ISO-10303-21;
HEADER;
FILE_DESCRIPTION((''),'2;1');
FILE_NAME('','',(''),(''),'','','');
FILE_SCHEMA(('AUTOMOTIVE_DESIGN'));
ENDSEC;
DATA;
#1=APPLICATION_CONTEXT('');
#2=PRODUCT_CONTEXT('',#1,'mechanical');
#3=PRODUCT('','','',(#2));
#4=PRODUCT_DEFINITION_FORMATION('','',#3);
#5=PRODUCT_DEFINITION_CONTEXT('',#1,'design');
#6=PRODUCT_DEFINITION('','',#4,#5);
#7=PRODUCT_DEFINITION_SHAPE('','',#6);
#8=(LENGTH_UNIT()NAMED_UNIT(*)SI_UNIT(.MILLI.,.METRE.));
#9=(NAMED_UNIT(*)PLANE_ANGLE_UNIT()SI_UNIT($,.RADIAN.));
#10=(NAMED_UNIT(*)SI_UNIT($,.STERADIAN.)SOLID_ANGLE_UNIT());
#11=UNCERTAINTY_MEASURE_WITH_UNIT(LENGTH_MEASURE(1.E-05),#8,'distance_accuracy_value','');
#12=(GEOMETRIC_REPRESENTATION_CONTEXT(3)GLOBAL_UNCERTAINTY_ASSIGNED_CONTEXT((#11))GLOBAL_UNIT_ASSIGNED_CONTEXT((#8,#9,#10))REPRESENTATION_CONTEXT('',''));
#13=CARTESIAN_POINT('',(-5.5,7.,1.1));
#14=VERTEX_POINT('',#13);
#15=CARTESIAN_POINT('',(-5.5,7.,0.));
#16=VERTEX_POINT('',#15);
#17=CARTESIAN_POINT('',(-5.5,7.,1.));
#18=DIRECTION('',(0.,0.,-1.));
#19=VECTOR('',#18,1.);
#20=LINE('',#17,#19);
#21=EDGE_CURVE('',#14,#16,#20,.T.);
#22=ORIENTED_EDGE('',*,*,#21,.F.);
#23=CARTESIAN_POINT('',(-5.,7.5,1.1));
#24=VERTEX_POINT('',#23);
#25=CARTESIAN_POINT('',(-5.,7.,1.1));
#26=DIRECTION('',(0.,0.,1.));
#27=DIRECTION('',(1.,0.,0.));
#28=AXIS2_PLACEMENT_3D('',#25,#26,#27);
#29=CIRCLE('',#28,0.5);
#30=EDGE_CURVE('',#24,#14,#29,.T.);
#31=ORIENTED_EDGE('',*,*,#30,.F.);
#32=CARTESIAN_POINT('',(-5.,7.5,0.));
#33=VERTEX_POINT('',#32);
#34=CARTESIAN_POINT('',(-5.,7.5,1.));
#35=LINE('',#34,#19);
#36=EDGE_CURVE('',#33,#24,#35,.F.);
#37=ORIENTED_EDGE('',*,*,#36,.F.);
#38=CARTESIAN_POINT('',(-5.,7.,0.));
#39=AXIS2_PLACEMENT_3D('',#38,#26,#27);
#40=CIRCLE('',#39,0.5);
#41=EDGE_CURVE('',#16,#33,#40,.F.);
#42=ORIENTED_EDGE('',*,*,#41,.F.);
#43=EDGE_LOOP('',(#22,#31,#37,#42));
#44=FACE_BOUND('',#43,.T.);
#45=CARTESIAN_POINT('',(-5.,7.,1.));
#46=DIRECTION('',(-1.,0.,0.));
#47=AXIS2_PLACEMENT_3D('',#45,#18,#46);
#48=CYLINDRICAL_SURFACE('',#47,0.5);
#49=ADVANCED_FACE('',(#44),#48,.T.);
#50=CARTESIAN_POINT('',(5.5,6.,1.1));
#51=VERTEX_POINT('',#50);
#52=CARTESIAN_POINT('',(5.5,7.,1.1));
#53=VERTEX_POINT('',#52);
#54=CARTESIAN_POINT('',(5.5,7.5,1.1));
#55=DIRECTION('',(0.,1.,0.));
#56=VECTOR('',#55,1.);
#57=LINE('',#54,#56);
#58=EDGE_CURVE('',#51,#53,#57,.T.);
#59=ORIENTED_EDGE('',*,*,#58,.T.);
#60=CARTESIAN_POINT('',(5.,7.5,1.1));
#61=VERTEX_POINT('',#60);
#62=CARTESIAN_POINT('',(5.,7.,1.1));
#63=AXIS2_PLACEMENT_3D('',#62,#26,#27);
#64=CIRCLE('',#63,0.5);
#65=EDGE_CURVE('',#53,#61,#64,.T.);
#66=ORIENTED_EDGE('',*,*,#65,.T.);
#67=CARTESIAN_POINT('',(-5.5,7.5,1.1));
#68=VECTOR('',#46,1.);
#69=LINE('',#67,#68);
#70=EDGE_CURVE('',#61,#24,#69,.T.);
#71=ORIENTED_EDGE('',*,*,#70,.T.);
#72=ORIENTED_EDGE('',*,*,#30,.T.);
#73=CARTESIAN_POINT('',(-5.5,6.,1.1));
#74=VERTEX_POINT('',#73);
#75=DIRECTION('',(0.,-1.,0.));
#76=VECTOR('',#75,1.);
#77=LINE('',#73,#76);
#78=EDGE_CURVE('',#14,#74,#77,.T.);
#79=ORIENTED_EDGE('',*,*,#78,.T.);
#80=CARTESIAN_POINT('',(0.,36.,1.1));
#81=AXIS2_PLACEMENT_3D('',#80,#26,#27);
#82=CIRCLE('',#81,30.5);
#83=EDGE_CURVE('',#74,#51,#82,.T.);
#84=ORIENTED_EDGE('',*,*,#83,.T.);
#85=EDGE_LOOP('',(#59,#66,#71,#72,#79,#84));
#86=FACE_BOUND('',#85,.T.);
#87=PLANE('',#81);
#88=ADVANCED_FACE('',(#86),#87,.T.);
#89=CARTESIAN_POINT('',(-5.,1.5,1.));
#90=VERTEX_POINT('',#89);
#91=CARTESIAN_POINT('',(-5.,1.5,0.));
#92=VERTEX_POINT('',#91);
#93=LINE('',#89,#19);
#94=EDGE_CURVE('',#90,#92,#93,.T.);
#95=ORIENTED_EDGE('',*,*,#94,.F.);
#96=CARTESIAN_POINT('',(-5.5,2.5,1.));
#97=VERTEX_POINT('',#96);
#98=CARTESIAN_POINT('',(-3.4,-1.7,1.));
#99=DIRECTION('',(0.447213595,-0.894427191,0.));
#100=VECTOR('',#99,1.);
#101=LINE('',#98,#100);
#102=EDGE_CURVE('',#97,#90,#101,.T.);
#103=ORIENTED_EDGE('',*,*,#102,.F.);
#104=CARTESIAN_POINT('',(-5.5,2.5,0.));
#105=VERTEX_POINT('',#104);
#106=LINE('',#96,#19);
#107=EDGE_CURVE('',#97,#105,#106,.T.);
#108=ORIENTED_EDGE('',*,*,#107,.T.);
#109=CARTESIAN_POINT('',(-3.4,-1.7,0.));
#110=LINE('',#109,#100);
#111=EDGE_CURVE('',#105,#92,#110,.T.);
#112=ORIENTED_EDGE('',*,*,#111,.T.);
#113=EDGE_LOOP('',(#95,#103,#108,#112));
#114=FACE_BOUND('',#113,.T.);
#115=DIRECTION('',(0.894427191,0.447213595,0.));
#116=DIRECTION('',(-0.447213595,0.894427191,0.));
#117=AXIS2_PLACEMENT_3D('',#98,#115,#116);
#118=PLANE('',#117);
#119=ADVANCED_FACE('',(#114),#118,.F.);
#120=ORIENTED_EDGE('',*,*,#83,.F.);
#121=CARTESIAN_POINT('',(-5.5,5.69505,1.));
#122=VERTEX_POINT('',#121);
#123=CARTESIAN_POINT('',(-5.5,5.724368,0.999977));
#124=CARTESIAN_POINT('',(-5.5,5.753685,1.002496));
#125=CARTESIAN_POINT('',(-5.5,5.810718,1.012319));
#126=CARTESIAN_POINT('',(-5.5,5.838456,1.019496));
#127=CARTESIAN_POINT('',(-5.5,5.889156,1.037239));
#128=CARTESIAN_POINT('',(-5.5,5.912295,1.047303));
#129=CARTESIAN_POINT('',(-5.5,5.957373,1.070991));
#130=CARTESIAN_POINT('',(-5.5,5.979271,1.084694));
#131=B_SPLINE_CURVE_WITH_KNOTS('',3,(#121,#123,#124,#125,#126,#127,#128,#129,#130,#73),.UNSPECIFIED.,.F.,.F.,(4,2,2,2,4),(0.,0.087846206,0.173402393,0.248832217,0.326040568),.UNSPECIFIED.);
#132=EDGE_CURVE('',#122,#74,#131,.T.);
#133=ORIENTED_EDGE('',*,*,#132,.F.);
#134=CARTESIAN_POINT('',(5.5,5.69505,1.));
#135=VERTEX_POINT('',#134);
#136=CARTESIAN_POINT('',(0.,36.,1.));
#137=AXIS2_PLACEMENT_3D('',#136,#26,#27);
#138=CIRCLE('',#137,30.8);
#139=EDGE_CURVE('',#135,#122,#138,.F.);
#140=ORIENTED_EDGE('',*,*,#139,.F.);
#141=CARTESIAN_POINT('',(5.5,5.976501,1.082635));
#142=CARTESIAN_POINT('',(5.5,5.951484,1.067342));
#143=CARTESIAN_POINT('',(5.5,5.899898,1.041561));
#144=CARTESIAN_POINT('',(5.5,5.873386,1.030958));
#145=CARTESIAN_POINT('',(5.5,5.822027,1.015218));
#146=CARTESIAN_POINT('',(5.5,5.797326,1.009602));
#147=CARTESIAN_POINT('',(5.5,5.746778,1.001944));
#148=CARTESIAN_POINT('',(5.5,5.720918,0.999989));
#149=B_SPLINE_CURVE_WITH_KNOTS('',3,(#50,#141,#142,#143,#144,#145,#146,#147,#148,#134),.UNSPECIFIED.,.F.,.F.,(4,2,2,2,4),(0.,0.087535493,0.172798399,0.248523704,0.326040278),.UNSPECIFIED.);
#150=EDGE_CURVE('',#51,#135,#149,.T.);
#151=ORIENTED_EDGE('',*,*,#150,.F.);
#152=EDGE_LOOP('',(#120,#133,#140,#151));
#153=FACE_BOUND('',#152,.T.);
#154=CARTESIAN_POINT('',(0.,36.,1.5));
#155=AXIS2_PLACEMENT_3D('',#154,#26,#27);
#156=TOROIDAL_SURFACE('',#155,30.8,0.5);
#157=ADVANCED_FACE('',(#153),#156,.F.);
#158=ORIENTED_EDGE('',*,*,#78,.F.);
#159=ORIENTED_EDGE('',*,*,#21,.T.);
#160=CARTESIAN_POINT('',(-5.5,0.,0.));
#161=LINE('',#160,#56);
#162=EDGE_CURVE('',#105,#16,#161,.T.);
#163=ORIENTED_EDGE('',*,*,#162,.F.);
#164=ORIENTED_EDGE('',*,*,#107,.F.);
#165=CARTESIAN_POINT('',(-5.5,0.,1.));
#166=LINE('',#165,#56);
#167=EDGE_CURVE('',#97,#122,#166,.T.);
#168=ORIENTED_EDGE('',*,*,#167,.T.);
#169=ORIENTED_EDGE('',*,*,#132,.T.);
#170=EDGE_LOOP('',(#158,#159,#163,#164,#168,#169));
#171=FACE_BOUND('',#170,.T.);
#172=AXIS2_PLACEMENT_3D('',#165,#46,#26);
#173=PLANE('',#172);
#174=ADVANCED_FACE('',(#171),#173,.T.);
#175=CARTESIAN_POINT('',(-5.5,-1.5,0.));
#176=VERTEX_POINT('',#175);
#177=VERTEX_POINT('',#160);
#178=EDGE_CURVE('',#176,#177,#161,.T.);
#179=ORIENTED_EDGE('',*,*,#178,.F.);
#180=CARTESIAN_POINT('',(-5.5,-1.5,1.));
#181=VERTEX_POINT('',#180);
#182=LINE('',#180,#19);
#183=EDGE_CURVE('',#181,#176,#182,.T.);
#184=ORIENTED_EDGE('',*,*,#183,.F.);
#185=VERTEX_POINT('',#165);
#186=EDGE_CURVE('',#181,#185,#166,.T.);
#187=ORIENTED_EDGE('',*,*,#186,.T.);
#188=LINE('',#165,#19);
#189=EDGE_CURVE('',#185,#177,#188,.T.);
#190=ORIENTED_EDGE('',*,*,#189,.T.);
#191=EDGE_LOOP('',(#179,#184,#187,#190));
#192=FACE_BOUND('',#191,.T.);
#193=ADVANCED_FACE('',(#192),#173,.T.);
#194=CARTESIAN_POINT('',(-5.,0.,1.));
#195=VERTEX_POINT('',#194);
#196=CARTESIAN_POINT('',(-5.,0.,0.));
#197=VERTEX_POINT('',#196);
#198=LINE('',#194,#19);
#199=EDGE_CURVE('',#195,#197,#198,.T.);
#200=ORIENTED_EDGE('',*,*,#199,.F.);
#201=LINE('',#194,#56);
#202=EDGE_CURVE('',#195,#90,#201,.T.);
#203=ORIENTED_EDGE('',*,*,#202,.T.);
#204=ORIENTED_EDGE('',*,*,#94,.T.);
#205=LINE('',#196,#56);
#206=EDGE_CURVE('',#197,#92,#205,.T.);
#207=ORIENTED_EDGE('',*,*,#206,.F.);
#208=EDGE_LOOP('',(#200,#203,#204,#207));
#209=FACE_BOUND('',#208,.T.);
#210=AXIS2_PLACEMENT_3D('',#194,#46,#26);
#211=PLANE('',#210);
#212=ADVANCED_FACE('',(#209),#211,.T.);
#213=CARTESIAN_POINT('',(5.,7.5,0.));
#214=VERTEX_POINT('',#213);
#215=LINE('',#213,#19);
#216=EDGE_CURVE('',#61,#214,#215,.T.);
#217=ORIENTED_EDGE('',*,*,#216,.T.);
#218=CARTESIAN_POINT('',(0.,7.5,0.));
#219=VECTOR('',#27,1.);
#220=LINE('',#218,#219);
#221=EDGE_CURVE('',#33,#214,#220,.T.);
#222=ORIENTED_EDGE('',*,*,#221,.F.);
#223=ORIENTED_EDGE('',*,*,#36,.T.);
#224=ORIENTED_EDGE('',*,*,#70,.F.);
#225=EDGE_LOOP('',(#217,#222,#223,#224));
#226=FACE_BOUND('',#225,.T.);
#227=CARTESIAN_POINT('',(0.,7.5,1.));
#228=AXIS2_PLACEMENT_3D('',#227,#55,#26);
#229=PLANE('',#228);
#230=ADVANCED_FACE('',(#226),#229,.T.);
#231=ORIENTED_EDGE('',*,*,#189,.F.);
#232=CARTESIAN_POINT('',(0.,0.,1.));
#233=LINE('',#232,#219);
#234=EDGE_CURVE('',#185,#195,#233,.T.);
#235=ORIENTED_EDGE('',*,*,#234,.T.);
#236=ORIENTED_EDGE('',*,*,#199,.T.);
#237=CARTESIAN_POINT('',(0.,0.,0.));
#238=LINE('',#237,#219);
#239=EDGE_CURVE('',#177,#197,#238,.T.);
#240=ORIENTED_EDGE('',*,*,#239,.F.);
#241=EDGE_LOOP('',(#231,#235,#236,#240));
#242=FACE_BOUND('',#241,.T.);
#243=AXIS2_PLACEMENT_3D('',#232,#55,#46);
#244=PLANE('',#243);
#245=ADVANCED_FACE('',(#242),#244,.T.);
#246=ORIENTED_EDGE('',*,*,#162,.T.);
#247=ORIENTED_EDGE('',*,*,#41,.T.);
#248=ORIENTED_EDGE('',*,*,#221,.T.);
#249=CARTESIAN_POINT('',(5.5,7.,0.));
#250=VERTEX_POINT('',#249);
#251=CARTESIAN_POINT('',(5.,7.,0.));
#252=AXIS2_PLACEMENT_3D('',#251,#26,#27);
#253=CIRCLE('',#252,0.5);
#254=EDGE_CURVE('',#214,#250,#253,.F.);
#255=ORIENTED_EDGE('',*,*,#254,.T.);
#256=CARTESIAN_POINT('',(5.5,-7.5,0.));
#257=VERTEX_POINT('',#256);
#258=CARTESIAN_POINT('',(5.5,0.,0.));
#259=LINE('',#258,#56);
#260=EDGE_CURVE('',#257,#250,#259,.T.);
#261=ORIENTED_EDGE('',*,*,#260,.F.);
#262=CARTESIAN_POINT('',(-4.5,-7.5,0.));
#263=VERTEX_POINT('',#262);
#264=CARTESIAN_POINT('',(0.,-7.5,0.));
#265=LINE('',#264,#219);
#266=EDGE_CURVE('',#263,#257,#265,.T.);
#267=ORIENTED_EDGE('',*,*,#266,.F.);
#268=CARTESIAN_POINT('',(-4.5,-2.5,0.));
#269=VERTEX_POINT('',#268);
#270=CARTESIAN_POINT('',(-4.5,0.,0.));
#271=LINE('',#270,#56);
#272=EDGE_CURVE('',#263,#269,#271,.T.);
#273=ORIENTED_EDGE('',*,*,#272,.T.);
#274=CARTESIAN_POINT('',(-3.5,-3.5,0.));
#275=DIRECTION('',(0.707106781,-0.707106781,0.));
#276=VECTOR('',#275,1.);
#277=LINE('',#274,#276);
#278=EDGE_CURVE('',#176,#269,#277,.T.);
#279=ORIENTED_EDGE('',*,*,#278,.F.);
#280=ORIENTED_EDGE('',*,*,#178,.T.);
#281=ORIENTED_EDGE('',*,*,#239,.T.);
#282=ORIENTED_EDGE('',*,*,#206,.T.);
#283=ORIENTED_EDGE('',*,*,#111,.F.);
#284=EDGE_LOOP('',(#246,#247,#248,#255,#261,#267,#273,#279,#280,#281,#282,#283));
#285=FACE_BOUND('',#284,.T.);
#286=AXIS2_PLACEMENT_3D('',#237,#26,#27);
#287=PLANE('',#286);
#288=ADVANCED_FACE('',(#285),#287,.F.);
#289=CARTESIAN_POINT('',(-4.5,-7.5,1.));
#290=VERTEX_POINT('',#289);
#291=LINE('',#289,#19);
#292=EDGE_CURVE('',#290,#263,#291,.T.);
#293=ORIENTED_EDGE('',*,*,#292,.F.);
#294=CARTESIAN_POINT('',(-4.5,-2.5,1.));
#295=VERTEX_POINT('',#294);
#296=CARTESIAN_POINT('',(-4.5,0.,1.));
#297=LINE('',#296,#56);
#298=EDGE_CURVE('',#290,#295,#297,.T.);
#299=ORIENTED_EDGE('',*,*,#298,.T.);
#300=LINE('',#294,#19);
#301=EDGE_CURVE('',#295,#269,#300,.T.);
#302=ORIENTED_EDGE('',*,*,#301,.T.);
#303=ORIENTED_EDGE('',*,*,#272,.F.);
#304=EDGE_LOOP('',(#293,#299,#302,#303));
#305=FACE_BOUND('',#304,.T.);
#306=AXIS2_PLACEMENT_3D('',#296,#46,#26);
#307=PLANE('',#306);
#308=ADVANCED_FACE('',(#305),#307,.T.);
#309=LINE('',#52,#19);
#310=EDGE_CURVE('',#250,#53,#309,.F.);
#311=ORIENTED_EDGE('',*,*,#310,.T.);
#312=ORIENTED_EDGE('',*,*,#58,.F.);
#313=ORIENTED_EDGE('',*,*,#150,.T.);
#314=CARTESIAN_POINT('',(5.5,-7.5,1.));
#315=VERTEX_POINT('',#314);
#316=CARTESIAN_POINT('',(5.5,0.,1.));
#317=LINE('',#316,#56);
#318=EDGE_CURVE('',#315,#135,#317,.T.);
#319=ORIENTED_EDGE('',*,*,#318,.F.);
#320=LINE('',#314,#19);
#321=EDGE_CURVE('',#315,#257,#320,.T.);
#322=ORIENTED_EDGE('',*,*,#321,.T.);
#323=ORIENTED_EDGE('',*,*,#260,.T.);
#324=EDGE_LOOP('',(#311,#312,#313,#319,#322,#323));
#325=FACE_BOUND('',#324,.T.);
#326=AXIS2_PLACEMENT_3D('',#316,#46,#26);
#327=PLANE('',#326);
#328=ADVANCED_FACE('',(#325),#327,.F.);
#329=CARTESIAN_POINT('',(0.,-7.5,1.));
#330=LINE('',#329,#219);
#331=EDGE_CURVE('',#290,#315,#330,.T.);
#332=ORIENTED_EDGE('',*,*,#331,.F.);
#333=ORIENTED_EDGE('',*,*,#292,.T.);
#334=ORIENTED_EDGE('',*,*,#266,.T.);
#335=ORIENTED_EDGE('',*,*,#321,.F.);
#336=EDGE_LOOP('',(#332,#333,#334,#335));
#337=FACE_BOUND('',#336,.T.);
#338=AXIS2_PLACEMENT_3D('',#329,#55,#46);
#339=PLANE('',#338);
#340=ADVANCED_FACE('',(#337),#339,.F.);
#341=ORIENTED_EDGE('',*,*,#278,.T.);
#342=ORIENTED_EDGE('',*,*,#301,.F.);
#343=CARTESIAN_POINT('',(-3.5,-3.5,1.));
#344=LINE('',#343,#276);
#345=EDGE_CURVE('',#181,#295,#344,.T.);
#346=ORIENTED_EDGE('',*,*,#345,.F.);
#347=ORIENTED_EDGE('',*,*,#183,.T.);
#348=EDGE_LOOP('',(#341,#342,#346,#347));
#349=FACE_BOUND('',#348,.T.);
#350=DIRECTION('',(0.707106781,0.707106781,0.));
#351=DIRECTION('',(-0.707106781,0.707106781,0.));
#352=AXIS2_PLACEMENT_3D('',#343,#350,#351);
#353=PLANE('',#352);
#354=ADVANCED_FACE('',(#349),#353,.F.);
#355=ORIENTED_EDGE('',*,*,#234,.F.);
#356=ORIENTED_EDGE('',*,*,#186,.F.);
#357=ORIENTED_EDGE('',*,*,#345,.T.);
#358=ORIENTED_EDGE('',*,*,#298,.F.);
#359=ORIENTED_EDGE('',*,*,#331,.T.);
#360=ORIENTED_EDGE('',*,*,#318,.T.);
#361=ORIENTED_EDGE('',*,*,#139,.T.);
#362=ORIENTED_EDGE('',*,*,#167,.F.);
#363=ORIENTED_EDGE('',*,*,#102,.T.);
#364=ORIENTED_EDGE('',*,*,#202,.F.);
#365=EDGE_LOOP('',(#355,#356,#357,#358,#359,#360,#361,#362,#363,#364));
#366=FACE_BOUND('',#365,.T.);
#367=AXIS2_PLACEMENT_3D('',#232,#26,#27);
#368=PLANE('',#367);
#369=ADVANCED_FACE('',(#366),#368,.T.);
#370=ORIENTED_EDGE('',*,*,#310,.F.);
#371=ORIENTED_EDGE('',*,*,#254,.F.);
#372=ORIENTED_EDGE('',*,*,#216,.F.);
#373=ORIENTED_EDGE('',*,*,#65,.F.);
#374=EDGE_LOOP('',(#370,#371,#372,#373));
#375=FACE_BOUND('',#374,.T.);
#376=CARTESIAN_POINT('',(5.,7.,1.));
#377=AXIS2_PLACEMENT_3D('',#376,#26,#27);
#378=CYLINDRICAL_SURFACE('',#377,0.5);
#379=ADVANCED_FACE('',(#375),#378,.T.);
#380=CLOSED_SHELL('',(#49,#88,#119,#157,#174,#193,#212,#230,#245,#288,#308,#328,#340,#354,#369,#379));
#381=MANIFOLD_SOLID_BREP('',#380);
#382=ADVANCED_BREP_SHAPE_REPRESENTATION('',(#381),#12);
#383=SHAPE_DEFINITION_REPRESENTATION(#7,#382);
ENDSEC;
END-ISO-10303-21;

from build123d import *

# Parameters (mm, degrees)
EXTRUDE_1_DEPTH = 1
EXTRUDE_2_DEPTH = 0.1
FILLET_1_R      = 0.5
FILLET_2_R      = 0.5


with BuildPart() as part:
    # 草图1 → 凸台-拉伸1 (new body)
    with BuildSketch(Plane.XY):
        Polygon((-5, 0), (-5, 1.5), (-5.5, 2.5), (-5.5, 7.5), (5.5, 7.5), (5.5, -7.5), (-4.5, -7.5), (-4.5, -2.5), (-5.5, -1.5), (-5.5, 0), align=None)
    extrude(amount=EXTRUDE_1_DEPTH)

    # 草图2 → 凸台-拉伸2 (add)
    with BuildSketch(Plane.XY.offset(1)):
        with BuildLine():
            Line((-5.5, 6), (-5.5, 7.5))
            Line((-5.5, 7.5), (5.5, 7.5))
            Line((5.5, 7.5), (5.5, 6))
            ThreePointArc((5.5, 6), (0, 5.5), (-5.5, 6))
        make_face()
    extrude(amount=EXTRUDE_2_DEPTH)

    # 圆角1
    # the kernel refuses this fillet: 0.5 mm, written as the material it adds along each edge
    with BuildSketch(Plane(origin=(0, 36, 1), x_dir=(0.20445847585132765, -0.9788752380423933, 0), z_dir=(0.9788752380423933, 0.20445847585132765, 0))) as fillet_1_piece_1_section:
        with BuildLine():
            CenterArc((30.8, -0.5), FILLET_1_R, 90, 36.869897646)
            Line((30.5, -0.1), (30.5, 0))
            Line((30.5, 0), (30.8, 0))
        make_face()
    fillet_1_piece_1 = revolve(axis=Axis((0, 36, 1), (0, 0, -1)), revolution_arc=23.595601167, mode=Mode.PRIVATE)
    fillet_1_piece_1 = split(fillet_1_piece_1, bisect_by=Plane(origin=(-5.5, 5.358430111, 1.024709668), z_dir=(1, 0, 0)), keep=Keep.TOP, mode=Mode.PRIVATE)
    fillet_1_piece_1 = split(fillet_1_piece_1, bisect_by=Plane(origin=(5.5, 5.358430111, 1.024709668), z_dir=(-1, 0, 0)), keep=Keep.TOP, mode=Mode.PRIVATE)
    add(fillet_1_piece_1)

    # 圆角2
    fillet_2_edges = [part.edges().sort_by_distance(p)[0] for p in [
        (-5.5, 7.5, 0.55),
        (5.5, 7.5, 0.55),
    ]]
    fillet(fillet_2_edges, radius=FILLET_2_R)


solid = part.part
